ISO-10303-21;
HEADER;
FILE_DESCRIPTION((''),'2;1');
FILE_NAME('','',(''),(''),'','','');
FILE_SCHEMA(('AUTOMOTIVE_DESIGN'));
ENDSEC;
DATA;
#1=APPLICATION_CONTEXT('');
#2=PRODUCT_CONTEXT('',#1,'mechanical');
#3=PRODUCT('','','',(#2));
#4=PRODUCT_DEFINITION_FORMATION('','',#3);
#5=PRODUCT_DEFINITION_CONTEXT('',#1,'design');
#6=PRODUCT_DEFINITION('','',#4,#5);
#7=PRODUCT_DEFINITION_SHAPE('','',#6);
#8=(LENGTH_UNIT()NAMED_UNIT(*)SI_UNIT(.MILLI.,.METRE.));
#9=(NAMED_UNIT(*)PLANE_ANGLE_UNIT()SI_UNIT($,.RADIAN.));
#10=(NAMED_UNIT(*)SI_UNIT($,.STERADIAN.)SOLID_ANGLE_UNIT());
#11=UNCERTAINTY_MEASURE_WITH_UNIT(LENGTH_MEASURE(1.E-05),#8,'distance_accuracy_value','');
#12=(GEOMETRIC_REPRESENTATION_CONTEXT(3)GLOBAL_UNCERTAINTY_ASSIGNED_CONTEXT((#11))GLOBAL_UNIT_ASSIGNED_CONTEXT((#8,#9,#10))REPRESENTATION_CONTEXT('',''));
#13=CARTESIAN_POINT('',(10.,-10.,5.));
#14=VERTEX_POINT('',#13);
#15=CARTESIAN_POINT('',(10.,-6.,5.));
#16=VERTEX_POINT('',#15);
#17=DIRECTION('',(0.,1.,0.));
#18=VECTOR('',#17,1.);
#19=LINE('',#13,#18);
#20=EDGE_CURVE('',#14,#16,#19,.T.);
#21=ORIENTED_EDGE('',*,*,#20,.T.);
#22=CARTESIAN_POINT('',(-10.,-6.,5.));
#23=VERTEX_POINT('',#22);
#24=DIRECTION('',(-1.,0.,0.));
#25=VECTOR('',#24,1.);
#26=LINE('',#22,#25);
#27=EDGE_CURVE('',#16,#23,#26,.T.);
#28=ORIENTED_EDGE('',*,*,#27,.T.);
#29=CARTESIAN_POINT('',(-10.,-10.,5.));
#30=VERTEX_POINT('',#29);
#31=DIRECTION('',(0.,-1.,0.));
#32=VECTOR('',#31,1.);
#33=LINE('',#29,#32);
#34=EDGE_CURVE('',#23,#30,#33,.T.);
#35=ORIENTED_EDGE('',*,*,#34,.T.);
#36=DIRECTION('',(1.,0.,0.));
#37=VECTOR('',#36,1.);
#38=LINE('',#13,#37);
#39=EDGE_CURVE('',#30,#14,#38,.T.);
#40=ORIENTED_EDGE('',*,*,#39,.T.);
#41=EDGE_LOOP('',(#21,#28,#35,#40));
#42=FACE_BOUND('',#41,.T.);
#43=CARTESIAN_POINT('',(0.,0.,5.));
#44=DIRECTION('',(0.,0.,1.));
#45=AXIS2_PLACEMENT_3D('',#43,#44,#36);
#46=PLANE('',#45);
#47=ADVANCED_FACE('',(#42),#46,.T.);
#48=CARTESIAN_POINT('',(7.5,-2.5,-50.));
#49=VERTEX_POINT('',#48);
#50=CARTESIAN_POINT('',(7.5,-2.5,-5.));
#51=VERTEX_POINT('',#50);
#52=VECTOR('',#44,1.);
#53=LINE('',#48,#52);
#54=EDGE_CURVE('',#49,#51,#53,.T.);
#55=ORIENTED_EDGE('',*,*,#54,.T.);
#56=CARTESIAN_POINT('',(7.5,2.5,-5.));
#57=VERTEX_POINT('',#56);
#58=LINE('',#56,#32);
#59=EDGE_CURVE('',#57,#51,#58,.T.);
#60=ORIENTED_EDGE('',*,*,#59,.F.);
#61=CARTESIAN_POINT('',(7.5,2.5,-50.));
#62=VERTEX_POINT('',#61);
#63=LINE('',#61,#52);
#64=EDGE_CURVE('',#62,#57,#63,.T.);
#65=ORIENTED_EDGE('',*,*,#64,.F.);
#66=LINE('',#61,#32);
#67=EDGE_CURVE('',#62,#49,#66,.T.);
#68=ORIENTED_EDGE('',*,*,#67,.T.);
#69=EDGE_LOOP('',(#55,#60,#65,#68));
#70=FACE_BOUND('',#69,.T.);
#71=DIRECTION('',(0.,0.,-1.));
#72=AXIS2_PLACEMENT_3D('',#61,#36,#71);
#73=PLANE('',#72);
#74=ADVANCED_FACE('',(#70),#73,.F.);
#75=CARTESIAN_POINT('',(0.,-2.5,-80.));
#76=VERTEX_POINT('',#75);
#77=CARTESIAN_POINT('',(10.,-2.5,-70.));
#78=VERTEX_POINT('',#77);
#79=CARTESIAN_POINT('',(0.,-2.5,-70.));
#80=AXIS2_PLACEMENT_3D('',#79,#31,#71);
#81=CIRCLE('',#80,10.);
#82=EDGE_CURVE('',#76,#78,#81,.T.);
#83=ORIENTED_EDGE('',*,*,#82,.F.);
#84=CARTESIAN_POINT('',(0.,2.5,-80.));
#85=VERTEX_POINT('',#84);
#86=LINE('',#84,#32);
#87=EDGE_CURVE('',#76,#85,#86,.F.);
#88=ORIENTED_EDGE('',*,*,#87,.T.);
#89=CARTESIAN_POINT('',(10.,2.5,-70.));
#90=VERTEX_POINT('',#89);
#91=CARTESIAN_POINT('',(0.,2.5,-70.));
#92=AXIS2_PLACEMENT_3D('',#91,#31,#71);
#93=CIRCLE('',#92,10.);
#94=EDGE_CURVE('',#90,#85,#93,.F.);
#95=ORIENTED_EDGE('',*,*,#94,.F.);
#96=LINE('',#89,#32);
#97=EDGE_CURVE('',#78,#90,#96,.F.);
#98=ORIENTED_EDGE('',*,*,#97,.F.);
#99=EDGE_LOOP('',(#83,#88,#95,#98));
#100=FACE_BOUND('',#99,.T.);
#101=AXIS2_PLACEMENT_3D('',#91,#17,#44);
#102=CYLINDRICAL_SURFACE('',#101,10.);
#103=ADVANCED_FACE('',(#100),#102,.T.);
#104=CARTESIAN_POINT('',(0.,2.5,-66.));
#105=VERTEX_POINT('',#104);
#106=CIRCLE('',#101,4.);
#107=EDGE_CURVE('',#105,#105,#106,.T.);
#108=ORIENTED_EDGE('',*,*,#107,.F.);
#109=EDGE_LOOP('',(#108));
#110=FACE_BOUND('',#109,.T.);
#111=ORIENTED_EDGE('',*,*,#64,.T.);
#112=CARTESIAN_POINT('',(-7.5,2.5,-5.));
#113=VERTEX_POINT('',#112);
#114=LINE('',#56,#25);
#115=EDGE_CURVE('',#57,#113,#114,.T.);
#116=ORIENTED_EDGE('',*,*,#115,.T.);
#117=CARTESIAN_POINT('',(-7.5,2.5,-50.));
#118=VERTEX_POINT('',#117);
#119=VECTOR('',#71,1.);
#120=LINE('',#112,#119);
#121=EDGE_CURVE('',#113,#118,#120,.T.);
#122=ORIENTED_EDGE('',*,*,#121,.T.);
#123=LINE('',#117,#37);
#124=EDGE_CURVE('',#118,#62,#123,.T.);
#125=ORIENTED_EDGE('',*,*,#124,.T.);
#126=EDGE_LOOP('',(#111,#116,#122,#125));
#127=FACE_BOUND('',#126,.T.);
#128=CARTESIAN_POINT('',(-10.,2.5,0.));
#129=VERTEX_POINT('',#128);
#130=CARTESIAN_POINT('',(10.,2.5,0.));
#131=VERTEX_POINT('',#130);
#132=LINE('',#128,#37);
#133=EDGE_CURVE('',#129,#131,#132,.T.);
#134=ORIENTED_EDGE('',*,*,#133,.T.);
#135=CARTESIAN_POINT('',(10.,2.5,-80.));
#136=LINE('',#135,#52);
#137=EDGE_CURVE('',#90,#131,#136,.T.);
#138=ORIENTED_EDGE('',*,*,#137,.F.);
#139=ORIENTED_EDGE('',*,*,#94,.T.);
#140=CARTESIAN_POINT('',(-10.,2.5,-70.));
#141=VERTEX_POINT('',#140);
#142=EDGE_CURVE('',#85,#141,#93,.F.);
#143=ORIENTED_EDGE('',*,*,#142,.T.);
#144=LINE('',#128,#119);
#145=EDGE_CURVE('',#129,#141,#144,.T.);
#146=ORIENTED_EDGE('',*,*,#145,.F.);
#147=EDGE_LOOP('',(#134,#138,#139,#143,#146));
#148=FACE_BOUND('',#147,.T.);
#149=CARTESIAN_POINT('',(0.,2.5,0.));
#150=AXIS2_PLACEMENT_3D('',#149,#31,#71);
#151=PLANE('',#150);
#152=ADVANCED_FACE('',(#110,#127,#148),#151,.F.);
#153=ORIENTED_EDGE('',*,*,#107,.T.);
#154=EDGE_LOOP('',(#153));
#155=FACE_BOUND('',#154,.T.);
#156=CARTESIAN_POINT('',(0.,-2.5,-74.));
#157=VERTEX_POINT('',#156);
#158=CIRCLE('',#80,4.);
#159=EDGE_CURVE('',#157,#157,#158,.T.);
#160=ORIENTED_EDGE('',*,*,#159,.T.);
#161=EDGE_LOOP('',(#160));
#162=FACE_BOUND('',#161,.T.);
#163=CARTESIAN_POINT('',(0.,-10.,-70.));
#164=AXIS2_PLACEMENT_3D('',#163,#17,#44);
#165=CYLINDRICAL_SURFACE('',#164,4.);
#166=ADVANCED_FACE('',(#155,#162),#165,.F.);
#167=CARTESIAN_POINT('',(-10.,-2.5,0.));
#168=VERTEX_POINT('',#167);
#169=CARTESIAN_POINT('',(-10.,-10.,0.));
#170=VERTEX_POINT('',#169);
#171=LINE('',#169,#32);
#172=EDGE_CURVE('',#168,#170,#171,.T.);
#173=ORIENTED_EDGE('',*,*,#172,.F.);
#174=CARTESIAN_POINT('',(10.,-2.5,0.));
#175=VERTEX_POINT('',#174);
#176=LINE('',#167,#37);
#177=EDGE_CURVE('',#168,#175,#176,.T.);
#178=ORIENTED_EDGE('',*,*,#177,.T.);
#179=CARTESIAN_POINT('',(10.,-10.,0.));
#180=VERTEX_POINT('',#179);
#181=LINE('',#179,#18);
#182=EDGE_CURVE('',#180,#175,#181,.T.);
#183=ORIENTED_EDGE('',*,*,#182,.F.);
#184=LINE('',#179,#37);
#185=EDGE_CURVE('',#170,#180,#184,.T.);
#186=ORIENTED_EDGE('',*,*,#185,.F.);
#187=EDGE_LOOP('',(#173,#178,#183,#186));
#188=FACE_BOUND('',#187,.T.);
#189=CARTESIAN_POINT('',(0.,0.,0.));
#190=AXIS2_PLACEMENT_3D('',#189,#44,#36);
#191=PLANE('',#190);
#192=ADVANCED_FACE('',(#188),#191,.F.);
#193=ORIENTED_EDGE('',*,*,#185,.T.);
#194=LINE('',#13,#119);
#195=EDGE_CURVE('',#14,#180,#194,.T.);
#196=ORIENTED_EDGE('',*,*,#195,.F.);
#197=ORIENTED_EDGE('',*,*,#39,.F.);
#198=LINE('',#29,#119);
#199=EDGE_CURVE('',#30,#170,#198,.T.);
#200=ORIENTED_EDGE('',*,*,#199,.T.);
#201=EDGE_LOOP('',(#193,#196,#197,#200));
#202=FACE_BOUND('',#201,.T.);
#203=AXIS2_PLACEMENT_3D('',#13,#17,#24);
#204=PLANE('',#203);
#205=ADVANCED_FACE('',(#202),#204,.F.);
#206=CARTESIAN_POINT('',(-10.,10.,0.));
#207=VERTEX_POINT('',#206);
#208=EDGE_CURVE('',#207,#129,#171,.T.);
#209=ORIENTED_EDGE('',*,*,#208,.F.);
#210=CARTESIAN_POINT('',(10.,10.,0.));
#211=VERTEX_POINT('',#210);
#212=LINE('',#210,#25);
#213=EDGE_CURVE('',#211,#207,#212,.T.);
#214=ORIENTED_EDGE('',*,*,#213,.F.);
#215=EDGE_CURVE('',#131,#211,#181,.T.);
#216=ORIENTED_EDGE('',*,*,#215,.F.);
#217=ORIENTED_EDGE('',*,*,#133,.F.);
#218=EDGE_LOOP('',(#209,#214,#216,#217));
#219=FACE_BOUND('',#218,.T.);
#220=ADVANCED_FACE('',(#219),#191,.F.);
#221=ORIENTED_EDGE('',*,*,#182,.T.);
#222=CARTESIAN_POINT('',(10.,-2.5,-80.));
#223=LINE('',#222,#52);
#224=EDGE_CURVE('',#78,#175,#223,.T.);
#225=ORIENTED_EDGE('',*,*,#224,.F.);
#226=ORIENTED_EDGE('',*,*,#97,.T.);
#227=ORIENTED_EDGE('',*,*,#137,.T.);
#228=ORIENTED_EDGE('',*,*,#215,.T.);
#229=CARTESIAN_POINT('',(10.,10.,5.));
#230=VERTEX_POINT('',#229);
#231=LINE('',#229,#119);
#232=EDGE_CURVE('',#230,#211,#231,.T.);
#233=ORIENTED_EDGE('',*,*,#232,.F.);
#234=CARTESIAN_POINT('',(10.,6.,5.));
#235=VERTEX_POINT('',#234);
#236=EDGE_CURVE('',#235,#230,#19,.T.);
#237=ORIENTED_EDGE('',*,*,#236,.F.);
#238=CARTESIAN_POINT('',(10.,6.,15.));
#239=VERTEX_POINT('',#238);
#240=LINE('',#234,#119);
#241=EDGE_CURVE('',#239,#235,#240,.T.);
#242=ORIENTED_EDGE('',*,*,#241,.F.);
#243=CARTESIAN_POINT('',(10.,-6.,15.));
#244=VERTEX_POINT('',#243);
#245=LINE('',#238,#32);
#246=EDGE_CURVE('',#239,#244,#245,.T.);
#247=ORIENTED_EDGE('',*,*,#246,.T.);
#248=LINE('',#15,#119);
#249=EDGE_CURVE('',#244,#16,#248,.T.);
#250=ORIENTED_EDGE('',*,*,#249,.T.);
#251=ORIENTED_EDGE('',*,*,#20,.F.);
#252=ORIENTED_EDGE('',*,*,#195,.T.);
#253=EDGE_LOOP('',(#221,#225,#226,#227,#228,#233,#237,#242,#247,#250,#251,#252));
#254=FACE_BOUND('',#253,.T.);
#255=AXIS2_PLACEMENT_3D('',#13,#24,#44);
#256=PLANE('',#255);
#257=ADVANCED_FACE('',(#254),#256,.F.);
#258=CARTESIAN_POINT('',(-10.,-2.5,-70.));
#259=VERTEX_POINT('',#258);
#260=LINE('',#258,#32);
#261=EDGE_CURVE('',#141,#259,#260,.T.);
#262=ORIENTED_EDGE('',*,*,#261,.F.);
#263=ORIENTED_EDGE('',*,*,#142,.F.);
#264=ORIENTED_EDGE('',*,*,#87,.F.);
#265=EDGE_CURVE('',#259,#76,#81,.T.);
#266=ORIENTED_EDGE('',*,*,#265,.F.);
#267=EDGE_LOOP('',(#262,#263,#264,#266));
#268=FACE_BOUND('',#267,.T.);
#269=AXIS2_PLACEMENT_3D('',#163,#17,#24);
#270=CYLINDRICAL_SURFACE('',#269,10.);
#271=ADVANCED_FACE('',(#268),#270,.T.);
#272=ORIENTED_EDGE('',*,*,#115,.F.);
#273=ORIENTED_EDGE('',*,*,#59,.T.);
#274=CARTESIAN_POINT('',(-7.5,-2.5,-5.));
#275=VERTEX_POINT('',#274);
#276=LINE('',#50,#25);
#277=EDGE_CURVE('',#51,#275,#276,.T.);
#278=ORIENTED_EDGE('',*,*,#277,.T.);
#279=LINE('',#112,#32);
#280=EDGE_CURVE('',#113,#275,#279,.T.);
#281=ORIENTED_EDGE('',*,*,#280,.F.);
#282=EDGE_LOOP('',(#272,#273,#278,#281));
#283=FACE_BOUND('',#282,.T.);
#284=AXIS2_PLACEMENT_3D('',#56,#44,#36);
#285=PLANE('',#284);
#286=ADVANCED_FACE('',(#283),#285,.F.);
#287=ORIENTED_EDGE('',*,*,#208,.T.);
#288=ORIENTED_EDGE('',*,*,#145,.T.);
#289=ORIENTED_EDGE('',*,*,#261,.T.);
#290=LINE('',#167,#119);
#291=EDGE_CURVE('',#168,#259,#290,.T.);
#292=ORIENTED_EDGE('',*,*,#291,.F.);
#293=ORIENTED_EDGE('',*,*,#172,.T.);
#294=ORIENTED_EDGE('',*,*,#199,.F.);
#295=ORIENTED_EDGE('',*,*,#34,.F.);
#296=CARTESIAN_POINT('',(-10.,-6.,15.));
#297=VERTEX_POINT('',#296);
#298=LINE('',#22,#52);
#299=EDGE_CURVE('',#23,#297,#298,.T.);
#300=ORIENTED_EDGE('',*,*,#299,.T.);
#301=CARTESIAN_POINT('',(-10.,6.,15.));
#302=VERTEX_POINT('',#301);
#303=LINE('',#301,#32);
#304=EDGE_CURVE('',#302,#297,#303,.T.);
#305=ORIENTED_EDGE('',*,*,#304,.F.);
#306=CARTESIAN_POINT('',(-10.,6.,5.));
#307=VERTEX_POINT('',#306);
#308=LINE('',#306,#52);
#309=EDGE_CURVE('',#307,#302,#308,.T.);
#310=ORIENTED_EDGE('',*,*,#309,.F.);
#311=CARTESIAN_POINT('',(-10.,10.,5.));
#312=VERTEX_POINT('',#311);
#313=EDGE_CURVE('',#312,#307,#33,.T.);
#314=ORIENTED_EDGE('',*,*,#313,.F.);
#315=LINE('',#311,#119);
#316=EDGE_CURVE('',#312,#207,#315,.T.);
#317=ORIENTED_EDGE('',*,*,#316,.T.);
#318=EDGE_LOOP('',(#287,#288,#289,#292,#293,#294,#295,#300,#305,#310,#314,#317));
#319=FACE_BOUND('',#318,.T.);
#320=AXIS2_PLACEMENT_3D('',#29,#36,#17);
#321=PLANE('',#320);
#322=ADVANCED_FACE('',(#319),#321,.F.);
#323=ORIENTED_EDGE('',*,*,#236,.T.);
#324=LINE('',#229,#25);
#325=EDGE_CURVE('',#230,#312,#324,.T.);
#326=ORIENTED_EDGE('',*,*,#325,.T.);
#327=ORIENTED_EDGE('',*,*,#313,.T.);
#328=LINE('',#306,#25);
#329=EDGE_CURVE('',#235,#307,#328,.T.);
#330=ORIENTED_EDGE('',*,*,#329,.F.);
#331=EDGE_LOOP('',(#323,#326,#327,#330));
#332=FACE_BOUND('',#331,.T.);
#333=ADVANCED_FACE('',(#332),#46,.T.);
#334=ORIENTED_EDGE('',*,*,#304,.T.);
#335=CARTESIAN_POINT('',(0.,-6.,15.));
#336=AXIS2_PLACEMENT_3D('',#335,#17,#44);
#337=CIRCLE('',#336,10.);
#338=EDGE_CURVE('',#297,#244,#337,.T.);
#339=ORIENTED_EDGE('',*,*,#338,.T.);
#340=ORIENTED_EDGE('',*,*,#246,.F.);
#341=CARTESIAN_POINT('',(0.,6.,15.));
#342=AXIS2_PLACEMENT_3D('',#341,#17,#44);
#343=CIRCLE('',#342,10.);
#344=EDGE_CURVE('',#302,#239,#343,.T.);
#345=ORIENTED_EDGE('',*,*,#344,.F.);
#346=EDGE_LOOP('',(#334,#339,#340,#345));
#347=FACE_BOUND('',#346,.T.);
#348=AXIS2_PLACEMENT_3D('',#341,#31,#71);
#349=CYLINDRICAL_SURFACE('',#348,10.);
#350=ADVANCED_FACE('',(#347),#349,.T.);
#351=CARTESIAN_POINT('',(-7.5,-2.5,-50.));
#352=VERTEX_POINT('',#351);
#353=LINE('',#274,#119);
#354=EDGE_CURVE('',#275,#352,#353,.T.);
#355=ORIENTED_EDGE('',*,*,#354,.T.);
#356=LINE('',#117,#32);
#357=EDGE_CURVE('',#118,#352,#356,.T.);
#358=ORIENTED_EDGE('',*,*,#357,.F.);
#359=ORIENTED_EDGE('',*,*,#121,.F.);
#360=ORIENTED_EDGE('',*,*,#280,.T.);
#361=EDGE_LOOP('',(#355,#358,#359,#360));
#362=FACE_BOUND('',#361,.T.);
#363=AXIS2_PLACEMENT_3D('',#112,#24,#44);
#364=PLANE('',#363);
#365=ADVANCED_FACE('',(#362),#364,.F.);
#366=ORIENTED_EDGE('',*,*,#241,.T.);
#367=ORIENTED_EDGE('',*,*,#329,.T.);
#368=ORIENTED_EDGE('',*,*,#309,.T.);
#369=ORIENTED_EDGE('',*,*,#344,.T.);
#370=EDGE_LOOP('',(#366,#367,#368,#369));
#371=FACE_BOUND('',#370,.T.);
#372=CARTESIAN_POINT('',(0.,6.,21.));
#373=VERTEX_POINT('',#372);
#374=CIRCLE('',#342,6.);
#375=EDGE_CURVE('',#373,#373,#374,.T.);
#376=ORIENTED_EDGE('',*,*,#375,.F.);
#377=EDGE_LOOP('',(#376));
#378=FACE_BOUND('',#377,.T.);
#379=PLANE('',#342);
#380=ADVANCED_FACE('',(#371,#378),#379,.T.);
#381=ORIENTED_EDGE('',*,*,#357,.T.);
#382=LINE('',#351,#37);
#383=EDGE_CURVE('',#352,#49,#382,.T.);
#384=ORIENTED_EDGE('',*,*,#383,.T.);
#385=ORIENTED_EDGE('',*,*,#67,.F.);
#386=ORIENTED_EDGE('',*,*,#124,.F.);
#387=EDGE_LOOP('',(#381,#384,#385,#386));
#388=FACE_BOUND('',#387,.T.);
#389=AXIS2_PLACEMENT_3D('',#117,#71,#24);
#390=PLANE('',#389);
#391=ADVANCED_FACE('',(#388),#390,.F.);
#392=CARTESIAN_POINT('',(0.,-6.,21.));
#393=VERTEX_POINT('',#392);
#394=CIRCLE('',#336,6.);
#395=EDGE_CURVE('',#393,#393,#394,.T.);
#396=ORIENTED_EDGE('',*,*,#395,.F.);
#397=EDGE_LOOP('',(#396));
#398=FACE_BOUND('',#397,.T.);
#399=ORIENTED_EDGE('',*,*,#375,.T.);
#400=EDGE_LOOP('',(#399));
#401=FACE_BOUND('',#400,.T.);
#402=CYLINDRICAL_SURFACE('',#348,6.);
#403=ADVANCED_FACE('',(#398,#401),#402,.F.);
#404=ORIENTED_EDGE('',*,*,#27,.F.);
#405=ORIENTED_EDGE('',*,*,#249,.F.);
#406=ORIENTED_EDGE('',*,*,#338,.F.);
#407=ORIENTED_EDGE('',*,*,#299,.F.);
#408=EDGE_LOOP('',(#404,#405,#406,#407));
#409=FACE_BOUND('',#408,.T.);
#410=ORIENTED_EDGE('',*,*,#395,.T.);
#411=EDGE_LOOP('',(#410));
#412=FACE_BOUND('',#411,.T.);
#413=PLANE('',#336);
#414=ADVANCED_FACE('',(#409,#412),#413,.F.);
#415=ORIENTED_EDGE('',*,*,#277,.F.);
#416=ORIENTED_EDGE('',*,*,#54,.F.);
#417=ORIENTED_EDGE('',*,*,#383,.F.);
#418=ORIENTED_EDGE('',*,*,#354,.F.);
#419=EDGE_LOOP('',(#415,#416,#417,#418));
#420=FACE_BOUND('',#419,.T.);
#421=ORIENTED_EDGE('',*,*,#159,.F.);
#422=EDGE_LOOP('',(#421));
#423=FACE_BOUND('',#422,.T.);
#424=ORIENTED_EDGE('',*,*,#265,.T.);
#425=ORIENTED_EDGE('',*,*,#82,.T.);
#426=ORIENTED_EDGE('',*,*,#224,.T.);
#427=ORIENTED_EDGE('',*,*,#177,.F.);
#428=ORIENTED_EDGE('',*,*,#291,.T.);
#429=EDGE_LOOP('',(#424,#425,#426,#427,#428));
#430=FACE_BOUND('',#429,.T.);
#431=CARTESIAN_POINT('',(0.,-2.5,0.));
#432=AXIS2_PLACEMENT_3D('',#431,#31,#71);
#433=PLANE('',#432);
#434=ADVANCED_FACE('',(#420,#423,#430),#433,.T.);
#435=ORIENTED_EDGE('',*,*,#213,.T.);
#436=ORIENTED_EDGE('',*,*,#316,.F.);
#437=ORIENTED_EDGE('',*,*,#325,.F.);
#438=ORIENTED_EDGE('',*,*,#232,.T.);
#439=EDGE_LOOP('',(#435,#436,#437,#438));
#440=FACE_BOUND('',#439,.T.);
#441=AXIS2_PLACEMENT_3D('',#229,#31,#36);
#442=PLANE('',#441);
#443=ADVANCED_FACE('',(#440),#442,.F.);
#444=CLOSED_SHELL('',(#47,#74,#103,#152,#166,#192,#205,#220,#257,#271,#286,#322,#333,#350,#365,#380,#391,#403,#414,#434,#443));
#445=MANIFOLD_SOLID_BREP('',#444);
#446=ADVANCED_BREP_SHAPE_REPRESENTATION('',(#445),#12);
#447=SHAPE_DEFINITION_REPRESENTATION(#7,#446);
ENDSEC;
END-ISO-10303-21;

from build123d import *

# Parameters (mm, degrees)
SKETCH_1_W          = 20
SKETCH_1_H          = 20
EXTRUDE_1_DEPTH     = 5
SKETCH_3_W          = 20
SKETCH_3_H          = 80
SKETCH_3_W_2        = 15
SKETCH_3_H_2        = 45
EXTRUDE_2_DEPTH     = 2.5
FILLET_1_R          = 10
SKETCH_5_R          = 4
CUT_EXTRUDE_1_DEPTH = 82.58584436
SKETCH_6_R          = 6
EXTRUDE_3_DEPTH     = 6


with BuildPart() as part:
    # 草图1 → 凸台-拉伸1 (new body)
    with BuildSketch(Plane.XY):
        Rectangle(SKETCH_1_W, SKETCH_1_H)
    extrude(amount=EXTRUDE_1_DEPTH)

    # 草图3 → 凸台-拉伸2 (add, symmetric)
    with BuildSketch(Plane(origin=(0, 0, 0), x_dir=(1, 0, 0), z_dir=(0, 1, 0))):
        with Locations((0, 40)):
            Rectangle(SKETCH_3_W, SKETCH_3_H)
        with Locations((0, 27.5)):
            Rectangle(SKETCH_3_W_2, SKETCH_3_H_2, mode=Mode.SUBTRACT)
    extrude(amount=EXTRUDE_2_DEPTH, both=True)

    # 圆角1
    fillet_1_edges = [part.edges().sort_by_distance(p)[0] for p in [
        (10, 0, -80),
        (-10, 0, -80),
    ]]
    fillet(fillet_1_edges, radius=FILLET_1_R - 0.0001)  # a hair under: the kernel refuses the full size

    # 草图5 → 切除-拉伸1 (cut, through all)
    with BuildSketch(Plane(origin=(0, 2.5, 0), x_dir=(1, 0, 0), z_dir=(0, 1, 0))):
        with Locations(Location((0, 70, 0), (0, 0, 270))):
            Circle(SKETCH_5_R)
    extrude(amount=-CUT_EXTRUDE_1_DEPTH, mode=Mode.SUBTRACT)

    # 草图6 → 凸台-拉伸3 (add, symmetric)
    with BuildSketch(Plane(origin=(0, 0, 0), x_dir=(1, 0, 0), z_dir=(0, 1, 0))):
        with BuildLine():
            Line((-10, -5), (-10, -15))
            ThreePointArc((-10, -15), (0, -25), (10, -15))
            Line((10, -15), (10, -5))
            Line((10, -5), (-10, -5))
        make_face()
        with Locations(Location((0, -15, 0), (0, 0, 270))):
            Circle(SKETCH_6_R, mode=Mode.SUBTRACT)
    extrude(amount=EXTRUDE_3_DEPTH, both=True)


solid = part.part
